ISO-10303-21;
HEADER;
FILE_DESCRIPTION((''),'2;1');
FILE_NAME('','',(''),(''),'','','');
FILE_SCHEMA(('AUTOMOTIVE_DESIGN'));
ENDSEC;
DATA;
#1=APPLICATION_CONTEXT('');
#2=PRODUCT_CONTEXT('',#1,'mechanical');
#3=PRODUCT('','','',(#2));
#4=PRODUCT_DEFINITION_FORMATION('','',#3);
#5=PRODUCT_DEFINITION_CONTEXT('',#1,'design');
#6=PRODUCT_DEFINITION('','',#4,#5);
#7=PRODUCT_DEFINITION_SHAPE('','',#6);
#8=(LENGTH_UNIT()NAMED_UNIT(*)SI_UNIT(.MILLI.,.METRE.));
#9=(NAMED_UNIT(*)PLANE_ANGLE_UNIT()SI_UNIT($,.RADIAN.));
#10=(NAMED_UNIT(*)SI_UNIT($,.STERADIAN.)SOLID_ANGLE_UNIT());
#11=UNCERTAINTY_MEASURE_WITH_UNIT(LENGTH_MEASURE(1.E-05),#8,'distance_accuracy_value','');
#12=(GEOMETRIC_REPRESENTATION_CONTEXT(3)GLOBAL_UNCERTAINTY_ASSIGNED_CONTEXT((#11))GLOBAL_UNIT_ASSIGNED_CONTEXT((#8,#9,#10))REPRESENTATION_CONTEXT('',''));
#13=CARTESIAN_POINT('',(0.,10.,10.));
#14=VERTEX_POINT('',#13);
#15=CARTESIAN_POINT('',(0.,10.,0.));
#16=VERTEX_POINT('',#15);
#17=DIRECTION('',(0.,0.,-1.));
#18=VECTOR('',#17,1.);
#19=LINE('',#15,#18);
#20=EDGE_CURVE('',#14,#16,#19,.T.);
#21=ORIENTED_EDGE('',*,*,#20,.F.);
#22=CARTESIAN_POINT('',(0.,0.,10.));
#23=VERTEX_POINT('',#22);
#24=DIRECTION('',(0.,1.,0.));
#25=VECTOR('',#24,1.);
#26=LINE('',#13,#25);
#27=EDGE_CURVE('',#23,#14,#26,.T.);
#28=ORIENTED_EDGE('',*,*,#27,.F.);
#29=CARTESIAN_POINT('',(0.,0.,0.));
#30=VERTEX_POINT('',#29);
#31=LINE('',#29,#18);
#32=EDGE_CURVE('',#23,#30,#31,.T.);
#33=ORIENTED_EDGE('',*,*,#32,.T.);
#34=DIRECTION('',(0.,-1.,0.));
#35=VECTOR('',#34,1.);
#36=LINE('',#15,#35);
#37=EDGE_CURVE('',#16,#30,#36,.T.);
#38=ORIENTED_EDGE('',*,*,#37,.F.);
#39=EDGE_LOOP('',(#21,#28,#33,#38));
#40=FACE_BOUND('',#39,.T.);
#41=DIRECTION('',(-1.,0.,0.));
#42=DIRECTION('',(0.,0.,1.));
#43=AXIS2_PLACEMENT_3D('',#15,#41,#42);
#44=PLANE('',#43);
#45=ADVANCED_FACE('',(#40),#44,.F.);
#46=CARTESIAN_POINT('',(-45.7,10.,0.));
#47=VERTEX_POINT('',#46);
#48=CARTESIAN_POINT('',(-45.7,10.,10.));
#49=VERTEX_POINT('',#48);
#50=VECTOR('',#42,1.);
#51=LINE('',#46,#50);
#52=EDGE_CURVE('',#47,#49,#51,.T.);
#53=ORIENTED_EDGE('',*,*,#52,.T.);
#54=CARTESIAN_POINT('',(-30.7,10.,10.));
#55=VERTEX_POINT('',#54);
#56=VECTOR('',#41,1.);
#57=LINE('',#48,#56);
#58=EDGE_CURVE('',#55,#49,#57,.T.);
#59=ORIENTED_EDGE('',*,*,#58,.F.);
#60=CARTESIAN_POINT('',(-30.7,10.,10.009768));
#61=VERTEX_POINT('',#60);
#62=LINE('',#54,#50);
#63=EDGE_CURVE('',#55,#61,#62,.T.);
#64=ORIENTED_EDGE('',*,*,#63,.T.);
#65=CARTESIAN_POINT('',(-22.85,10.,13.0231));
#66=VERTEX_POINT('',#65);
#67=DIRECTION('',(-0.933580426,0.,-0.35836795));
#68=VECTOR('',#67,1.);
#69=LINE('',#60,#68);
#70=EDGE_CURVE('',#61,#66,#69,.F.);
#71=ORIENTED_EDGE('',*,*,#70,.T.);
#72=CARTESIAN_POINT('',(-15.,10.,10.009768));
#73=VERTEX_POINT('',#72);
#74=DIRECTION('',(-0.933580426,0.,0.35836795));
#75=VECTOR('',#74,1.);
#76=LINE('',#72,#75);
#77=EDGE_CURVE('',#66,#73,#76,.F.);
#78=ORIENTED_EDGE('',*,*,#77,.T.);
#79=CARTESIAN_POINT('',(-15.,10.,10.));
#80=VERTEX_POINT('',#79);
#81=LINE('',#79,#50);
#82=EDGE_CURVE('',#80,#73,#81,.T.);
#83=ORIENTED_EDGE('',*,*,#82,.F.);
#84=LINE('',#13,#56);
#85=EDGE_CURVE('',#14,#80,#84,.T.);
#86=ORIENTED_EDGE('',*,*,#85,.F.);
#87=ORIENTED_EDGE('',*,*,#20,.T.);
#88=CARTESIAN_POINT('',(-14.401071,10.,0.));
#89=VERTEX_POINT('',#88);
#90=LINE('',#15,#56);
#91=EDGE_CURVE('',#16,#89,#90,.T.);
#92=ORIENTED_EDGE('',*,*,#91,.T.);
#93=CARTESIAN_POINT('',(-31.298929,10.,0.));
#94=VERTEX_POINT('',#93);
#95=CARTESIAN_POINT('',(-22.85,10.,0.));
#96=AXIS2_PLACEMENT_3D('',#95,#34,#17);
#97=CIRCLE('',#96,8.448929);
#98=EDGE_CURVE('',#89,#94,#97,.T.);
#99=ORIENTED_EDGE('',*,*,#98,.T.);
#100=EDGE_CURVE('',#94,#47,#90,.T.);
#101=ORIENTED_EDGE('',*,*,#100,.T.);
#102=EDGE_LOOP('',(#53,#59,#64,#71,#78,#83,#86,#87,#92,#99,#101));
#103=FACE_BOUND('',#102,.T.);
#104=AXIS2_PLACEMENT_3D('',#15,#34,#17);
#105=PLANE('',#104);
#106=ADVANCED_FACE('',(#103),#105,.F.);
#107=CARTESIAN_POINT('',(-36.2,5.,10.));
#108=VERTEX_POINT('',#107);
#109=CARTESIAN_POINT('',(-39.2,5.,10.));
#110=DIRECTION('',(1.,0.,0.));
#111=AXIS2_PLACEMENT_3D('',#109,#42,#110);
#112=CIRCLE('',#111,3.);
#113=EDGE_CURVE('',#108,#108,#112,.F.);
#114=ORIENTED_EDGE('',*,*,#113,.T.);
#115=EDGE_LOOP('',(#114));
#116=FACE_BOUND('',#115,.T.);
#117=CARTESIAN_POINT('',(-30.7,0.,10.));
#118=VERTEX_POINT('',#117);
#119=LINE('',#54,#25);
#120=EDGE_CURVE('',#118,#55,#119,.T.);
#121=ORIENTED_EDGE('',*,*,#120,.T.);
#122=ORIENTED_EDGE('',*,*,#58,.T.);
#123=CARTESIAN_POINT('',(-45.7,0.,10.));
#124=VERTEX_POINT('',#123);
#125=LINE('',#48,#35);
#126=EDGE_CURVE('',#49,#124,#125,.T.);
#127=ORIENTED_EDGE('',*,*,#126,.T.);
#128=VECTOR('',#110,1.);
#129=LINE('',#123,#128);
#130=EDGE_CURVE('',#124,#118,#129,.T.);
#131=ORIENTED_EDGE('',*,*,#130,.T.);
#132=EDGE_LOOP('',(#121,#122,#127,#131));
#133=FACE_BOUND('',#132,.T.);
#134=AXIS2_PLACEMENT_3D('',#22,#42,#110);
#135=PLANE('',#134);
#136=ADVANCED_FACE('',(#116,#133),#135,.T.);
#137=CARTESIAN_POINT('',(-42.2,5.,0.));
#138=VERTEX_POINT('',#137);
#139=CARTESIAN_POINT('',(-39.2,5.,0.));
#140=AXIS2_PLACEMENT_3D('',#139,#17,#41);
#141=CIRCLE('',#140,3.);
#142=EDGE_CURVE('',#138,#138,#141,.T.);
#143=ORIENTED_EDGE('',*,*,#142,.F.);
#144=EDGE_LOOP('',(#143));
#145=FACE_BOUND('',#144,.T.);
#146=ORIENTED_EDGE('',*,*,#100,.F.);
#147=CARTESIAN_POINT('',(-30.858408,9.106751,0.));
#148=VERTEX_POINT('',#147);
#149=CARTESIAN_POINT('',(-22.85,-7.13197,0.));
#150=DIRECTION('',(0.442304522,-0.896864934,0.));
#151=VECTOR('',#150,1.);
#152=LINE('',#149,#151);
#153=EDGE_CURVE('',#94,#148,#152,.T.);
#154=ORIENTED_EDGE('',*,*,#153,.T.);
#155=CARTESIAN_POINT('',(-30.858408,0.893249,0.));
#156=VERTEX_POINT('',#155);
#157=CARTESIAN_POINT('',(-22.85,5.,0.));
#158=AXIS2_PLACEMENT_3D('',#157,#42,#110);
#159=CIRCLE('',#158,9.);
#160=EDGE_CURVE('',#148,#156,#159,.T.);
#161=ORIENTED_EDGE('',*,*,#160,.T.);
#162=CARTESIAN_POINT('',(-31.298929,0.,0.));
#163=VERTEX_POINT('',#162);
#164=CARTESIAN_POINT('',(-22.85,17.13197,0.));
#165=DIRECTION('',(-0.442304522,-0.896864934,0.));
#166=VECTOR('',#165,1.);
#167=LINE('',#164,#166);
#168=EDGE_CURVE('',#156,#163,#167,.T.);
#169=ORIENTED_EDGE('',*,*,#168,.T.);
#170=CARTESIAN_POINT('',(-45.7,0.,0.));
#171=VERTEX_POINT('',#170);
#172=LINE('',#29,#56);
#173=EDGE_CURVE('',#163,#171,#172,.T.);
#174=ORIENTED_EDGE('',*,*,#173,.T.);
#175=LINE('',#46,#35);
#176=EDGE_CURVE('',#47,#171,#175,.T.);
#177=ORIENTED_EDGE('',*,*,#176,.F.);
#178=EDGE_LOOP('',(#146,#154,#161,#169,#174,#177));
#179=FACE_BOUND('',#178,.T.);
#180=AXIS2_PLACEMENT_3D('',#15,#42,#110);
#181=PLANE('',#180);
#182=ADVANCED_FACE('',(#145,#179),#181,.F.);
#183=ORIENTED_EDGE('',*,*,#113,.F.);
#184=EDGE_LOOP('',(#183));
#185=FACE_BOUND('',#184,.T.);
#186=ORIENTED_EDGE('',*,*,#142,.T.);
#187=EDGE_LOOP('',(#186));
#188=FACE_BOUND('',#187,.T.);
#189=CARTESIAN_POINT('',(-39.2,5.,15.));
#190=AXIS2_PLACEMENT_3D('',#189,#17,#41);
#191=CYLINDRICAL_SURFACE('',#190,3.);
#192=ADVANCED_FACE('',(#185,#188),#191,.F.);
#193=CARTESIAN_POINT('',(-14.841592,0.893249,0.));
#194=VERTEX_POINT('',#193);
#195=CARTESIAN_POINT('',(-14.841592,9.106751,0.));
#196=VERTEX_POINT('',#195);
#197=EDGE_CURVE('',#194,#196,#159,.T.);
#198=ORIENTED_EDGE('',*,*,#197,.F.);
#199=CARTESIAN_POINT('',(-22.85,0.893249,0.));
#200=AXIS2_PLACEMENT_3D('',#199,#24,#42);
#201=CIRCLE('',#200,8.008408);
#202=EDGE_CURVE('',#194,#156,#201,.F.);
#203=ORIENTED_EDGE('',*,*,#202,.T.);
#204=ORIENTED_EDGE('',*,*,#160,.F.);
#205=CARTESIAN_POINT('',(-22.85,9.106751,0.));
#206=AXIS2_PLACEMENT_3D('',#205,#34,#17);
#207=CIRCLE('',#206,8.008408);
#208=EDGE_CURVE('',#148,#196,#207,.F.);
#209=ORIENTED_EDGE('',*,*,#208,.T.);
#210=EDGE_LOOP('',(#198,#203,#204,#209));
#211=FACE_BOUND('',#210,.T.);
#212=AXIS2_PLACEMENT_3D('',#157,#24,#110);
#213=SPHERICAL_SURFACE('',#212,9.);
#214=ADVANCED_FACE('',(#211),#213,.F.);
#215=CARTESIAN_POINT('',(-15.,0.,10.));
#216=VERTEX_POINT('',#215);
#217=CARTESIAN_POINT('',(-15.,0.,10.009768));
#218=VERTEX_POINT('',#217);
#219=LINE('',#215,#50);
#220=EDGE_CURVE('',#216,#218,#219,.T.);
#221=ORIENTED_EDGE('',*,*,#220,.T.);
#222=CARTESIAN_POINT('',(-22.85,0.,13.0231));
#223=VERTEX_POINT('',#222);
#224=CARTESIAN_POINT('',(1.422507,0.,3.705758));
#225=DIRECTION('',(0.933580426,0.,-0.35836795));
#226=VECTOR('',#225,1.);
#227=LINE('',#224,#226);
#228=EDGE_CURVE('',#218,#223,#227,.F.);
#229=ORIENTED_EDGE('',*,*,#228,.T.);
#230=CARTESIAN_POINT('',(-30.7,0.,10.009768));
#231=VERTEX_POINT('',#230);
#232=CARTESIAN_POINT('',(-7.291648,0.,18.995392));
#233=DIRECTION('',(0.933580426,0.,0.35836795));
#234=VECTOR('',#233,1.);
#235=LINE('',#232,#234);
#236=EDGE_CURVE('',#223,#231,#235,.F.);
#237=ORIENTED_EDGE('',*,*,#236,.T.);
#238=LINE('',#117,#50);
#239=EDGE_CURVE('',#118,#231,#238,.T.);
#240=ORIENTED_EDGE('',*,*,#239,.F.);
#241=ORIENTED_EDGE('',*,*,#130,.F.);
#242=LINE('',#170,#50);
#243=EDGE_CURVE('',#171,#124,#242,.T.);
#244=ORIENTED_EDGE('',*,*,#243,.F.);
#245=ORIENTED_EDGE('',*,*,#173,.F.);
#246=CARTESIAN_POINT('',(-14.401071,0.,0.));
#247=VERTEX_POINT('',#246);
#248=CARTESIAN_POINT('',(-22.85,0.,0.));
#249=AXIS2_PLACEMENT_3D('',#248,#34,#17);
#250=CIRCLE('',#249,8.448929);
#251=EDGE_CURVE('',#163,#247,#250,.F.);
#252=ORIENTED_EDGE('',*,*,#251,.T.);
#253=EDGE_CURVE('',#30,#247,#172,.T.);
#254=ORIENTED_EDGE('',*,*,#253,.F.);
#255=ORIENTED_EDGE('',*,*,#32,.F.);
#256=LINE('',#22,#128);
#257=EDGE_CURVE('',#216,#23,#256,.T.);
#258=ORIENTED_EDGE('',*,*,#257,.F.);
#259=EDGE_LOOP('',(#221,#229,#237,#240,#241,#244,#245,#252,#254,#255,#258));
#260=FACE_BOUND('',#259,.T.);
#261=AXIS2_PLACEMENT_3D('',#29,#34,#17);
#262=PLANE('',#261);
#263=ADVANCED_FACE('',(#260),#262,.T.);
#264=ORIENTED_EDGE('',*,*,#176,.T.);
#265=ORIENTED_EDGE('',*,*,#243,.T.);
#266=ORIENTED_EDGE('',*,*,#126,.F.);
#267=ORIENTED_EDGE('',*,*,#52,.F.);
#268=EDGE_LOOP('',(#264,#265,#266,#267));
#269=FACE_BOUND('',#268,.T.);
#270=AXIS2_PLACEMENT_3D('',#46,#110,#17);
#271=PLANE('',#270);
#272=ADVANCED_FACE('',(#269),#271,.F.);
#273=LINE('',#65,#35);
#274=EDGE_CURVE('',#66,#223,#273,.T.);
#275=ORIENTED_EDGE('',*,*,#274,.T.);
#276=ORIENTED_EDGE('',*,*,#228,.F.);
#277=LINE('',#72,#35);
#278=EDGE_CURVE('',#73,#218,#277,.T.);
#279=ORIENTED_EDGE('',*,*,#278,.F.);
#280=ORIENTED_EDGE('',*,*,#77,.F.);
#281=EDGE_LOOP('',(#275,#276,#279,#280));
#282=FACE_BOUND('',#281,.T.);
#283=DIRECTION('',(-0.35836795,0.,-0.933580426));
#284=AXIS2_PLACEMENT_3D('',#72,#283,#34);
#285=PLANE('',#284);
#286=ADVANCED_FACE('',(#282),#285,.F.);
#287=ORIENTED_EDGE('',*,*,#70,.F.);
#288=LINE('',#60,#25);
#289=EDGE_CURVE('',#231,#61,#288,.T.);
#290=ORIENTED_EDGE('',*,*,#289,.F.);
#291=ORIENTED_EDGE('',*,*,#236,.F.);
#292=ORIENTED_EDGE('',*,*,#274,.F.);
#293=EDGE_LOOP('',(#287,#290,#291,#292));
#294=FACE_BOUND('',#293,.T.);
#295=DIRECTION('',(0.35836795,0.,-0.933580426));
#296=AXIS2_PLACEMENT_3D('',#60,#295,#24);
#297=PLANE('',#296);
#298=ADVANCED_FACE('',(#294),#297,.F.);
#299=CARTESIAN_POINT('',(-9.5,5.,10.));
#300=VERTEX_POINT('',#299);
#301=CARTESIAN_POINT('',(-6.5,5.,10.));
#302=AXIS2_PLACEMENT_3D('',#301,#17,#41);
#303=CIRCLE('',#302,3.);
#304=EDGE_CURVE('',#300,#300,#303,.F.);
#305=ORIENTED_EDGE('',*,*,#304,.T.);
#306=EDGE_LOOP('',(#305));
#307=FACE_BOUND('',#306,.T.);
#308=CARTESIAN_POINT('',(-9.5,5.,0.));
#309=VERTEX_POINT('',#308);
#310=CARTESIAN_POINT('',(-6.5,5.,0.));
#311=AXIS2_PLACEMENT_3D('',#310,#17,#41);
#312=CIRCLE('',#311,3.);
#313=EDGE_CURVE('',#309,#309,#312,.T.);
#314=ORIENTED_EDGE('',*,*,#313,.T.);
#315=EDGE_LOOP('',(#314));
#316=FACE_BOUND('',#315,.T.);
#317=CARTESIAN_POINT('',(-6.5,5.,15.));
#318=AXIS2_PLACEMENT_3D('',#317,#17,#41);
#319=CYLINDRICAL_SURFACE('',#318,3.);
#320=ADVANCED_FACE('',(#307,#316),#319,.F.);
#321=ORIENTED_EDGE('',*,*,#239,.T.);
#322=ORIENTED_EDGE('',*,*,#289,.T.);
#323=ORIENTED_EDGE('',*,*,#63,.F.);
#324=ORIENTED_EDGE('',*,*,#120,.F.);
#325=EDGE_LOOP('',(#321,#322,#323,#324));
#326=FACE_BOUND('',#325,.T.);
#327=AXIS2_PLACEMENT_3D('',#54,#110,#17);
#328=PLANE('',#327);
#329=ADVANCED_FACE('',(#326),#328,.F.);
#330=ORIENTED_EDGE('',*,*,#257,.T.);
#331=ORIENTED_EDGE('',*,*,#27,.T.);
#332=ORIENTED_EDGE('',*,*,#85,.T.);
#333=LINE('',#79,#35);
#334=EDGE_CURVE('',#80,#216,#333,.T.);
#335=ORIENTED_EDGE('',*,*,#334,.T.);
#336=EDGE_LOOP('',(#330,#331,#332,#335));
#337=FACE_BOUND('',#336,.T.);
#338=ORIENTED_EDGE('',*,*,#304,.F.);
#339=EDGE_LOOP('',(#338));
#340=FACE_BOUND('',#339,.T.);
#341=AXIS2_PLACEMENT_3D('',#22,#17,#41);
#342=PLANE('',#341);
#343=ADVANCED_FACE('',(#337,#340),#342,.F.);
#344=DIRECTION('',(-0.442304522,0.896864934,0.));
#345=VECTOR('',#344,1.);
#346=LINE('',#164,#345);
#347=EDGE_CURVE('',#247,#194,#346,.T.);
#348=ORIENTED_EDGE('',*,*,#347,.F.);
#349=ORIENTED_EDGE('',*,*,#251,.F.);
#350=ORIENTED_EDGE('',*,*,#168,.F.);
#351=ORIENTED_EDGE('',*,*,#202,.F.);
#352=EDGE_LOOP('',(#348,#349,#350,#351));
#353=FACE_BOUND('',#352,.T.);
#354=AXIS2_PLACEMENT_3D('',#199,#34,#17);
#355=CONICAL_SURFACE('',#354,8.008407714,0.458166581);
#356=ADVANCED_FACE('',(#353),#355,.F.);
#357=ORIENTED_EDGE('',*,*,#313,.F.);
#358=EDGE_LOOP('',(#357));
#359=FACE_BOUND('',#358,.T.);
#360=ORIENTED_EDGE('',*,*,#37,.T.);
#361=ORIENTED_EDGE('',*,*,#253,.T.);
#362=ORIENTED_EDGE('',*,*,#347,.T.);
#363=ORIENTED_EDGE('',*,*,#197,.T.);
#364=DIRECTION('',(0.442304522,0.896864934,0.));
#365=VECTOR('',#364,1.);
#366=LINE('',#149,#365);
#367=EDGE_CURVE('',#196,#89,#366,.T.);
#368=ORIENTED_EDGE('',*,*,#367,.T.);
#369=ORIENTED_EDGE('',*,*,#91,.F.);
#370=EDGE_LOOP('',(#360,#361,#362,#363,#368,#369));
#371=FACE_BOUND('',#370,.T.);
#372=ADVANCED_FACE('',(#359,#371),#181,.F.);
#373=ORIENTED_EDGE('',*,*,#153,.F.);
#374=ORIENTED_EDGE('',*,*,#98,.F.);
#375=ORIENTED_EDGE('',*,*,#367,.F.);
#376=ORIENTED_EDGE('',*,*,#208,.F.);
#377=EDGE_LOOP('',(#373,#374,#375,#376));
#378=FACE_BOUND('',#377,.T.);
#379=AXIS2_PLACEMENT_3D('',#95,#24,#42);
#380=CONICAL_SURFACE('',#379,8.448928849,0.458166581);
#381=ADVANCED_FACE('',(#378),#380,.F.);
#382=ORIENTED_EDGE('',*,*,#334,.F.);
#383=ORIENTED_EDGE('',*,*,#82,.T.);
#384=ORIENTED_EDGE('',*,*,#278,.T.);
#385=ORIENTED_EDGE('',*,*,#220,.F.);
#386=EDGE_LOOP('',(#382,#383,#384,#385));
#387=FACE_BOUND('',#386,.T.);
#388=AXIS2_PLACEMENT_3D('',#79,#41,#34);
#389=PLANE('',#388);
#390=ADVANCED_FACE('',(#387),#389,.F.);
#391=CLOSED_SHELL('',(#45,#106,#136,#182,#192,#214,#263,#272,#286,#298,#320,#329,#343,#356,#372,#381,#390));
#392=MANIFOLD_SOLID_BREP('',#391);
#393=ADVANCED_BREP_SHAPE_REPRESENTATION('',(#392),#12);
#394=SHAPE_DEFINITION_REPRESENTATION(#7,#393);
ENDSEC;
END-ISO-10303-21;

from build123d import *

# Parameters (mm, degrees)
SKETCH2_W           = 45.7
SKETCH2_H           = 15
BOSS_EXTRUDE1_DEPTH = 10
SKETCH4_R           = 3
CUT_EXTRUDE1_DEPTH  = 50.127283662
SKETCH5_W           = 15
SKETCH5_H           = 10
CUT_EXTRUDE2_DEPTH  = 5
CHAMFER1_SIZE       = 4.990232455
CHAMFER1_SIZE_2     = 13
CHAMFER2_SIZE       = 0.965614075


with BuildPart() as part:
    # Sketch2 → Boss-Extrude1 (new body)
    with BuildSketch(Plane(origin=(0, 0, 0), x_dir=(1, 0, 0), z_dir=(0, 1, 0))):
        with Locations((-22.85, -7.5)):
            Rectangle(SKETCH2_W, SKETCH2_H)
    extrude(amount=BOSS_EXTRUDE1_DEPTH)

    # Sketch3 → Cut-Revolve1 (revolve, cut)
    with BuildSketch(Plane(origin=(0, 0, 0), x_dir=(-1, 0, 0), z_dir=(0, 0, -1))):
        with BuildLine():
            Line((22.85, 14), (22.85, -4))
            ThreePointArc((22.85, -4), (13.85, 5), (22.85, 14))
        make_face()
    revolve(axis=Axis((-22.85, 14, 0), (0, -1, 0)), mode=Mode.SUBTRACT)

    # Sketch4 → Cut-Extrude1 (cut, through all)
    with BuildSketch(Plane(origin=(0, 0, 0), x_dir=(-1, 0, 0), z_dir=(0, 0, -1))):
        with Locations((6.5, 5)):
            Circle(SKETCH4_R)
        with Locations((39.2, 5)):
            Circle(SKETCH4_R)
    extrude(amount=-CUT_EXTRUDE1_DEPTH, mode=Mode.SUBTRACT)

    # Sketch5 → Cut-Extrude2 (cut)
    with BuildSketch(Plane.XY.offset(15)):
        with Locations((-38.2, 5)):
            Rectangle(SKETCH5_W, SKETCH5_H)
        with Locations((-7.5, 5)):
            Rectangle(SKETCH5_W, SKETCH5_H)
    extrude(amount=-CUT_EXTRUDE2_DEPTH, mode=Mode.SUBTRACT)

    # Chamfer1
    # the kernel refuses this chamfer: 13, 4.990232455 mm, written as the material it takes off along each edge
    with BuildSketch(Plane(origin=(-15, 43.716873314, 15), x_dir=(0, 0, -1), z_dir=(0, -1, 0))) as chamfer1_piece_1:
        Polygon((CHAMFER1_SIZE, 0), (0, -CHAMFER1_SIZE_2), (0, 0), align=None)
    extrude(amount=77.433746627, mode=Mode.SUBTRACT)
    with BuildSketch(Plane(origin=(-30.7, 43.716873314, 15), x_dir=(1, 0, 0), z_dir=(0, -1, 0))) as chamfer1_piece_2:
        Polygon((CHAMFER1_SIZE_2, 0), (0, -CHAMFER1_SIZE), (0, 0), align=None)
    extrude(amount=77.433746627, mode=Mode.SUBTRACT)

    # Chamfer2
    # the kernel refuses this chamfer: 1, 0.965614075 mm, written as the material it takes off along each edge
    with BuildSketch(Plane(origin=(-22.85, 0, 0), x_dir=(-0.9379115380464662, 0, -0.34687454043113636), z_dir=(0.34687454043113636, 0, -0.9379115380464662))) as chamfer2_piece_1:
        with BuildLine():
            Line((7.483314774 + CHAMFER2_SIZE, 0), (8.008407714, 0.893248743))
            ThreePointArc((8.008407714, 0.893248743), (7.764305072, 0.44856432), (7.483314774, 0))
            Line((7.483314774, 0), (7.483314774 + CHAMFER2_SIZE, 0))
        make_face()
    revolve(axis=Axis((-22.85, 0, 0), (0, 1, 0)), revolution_arc=220.592533512, mode=Mode.SUBTRACT)
    with BuildSketch(Plane(origin=(-22.85, 10, 0), x_dir=(-0.9379115380464663, 0, -0.3468745404311359), z_dir=(0.3468745404311359, 0, -0.9379115380464663))) as chamfer2_piece_2:
        with BuildLine():
            Line((8.008407714, -0.893248743), (7.483314774 + CHAMFER2_SIZE, 0))
            Line((7.483314774 + CHAMFER2_SIZE, 0), (7.483314774, 0))
            ThreePointArc((7.483314774, 0), (7.764305072, -0.44856432), (8.008407714, -0.893248743))
        make_face()
    revolve(axis=Axis((-22.85, 10, 0), (0, 1, 0)), revolution_arc=220.592533512, mode=Mode.SUBTRACT)


solid = part.part
